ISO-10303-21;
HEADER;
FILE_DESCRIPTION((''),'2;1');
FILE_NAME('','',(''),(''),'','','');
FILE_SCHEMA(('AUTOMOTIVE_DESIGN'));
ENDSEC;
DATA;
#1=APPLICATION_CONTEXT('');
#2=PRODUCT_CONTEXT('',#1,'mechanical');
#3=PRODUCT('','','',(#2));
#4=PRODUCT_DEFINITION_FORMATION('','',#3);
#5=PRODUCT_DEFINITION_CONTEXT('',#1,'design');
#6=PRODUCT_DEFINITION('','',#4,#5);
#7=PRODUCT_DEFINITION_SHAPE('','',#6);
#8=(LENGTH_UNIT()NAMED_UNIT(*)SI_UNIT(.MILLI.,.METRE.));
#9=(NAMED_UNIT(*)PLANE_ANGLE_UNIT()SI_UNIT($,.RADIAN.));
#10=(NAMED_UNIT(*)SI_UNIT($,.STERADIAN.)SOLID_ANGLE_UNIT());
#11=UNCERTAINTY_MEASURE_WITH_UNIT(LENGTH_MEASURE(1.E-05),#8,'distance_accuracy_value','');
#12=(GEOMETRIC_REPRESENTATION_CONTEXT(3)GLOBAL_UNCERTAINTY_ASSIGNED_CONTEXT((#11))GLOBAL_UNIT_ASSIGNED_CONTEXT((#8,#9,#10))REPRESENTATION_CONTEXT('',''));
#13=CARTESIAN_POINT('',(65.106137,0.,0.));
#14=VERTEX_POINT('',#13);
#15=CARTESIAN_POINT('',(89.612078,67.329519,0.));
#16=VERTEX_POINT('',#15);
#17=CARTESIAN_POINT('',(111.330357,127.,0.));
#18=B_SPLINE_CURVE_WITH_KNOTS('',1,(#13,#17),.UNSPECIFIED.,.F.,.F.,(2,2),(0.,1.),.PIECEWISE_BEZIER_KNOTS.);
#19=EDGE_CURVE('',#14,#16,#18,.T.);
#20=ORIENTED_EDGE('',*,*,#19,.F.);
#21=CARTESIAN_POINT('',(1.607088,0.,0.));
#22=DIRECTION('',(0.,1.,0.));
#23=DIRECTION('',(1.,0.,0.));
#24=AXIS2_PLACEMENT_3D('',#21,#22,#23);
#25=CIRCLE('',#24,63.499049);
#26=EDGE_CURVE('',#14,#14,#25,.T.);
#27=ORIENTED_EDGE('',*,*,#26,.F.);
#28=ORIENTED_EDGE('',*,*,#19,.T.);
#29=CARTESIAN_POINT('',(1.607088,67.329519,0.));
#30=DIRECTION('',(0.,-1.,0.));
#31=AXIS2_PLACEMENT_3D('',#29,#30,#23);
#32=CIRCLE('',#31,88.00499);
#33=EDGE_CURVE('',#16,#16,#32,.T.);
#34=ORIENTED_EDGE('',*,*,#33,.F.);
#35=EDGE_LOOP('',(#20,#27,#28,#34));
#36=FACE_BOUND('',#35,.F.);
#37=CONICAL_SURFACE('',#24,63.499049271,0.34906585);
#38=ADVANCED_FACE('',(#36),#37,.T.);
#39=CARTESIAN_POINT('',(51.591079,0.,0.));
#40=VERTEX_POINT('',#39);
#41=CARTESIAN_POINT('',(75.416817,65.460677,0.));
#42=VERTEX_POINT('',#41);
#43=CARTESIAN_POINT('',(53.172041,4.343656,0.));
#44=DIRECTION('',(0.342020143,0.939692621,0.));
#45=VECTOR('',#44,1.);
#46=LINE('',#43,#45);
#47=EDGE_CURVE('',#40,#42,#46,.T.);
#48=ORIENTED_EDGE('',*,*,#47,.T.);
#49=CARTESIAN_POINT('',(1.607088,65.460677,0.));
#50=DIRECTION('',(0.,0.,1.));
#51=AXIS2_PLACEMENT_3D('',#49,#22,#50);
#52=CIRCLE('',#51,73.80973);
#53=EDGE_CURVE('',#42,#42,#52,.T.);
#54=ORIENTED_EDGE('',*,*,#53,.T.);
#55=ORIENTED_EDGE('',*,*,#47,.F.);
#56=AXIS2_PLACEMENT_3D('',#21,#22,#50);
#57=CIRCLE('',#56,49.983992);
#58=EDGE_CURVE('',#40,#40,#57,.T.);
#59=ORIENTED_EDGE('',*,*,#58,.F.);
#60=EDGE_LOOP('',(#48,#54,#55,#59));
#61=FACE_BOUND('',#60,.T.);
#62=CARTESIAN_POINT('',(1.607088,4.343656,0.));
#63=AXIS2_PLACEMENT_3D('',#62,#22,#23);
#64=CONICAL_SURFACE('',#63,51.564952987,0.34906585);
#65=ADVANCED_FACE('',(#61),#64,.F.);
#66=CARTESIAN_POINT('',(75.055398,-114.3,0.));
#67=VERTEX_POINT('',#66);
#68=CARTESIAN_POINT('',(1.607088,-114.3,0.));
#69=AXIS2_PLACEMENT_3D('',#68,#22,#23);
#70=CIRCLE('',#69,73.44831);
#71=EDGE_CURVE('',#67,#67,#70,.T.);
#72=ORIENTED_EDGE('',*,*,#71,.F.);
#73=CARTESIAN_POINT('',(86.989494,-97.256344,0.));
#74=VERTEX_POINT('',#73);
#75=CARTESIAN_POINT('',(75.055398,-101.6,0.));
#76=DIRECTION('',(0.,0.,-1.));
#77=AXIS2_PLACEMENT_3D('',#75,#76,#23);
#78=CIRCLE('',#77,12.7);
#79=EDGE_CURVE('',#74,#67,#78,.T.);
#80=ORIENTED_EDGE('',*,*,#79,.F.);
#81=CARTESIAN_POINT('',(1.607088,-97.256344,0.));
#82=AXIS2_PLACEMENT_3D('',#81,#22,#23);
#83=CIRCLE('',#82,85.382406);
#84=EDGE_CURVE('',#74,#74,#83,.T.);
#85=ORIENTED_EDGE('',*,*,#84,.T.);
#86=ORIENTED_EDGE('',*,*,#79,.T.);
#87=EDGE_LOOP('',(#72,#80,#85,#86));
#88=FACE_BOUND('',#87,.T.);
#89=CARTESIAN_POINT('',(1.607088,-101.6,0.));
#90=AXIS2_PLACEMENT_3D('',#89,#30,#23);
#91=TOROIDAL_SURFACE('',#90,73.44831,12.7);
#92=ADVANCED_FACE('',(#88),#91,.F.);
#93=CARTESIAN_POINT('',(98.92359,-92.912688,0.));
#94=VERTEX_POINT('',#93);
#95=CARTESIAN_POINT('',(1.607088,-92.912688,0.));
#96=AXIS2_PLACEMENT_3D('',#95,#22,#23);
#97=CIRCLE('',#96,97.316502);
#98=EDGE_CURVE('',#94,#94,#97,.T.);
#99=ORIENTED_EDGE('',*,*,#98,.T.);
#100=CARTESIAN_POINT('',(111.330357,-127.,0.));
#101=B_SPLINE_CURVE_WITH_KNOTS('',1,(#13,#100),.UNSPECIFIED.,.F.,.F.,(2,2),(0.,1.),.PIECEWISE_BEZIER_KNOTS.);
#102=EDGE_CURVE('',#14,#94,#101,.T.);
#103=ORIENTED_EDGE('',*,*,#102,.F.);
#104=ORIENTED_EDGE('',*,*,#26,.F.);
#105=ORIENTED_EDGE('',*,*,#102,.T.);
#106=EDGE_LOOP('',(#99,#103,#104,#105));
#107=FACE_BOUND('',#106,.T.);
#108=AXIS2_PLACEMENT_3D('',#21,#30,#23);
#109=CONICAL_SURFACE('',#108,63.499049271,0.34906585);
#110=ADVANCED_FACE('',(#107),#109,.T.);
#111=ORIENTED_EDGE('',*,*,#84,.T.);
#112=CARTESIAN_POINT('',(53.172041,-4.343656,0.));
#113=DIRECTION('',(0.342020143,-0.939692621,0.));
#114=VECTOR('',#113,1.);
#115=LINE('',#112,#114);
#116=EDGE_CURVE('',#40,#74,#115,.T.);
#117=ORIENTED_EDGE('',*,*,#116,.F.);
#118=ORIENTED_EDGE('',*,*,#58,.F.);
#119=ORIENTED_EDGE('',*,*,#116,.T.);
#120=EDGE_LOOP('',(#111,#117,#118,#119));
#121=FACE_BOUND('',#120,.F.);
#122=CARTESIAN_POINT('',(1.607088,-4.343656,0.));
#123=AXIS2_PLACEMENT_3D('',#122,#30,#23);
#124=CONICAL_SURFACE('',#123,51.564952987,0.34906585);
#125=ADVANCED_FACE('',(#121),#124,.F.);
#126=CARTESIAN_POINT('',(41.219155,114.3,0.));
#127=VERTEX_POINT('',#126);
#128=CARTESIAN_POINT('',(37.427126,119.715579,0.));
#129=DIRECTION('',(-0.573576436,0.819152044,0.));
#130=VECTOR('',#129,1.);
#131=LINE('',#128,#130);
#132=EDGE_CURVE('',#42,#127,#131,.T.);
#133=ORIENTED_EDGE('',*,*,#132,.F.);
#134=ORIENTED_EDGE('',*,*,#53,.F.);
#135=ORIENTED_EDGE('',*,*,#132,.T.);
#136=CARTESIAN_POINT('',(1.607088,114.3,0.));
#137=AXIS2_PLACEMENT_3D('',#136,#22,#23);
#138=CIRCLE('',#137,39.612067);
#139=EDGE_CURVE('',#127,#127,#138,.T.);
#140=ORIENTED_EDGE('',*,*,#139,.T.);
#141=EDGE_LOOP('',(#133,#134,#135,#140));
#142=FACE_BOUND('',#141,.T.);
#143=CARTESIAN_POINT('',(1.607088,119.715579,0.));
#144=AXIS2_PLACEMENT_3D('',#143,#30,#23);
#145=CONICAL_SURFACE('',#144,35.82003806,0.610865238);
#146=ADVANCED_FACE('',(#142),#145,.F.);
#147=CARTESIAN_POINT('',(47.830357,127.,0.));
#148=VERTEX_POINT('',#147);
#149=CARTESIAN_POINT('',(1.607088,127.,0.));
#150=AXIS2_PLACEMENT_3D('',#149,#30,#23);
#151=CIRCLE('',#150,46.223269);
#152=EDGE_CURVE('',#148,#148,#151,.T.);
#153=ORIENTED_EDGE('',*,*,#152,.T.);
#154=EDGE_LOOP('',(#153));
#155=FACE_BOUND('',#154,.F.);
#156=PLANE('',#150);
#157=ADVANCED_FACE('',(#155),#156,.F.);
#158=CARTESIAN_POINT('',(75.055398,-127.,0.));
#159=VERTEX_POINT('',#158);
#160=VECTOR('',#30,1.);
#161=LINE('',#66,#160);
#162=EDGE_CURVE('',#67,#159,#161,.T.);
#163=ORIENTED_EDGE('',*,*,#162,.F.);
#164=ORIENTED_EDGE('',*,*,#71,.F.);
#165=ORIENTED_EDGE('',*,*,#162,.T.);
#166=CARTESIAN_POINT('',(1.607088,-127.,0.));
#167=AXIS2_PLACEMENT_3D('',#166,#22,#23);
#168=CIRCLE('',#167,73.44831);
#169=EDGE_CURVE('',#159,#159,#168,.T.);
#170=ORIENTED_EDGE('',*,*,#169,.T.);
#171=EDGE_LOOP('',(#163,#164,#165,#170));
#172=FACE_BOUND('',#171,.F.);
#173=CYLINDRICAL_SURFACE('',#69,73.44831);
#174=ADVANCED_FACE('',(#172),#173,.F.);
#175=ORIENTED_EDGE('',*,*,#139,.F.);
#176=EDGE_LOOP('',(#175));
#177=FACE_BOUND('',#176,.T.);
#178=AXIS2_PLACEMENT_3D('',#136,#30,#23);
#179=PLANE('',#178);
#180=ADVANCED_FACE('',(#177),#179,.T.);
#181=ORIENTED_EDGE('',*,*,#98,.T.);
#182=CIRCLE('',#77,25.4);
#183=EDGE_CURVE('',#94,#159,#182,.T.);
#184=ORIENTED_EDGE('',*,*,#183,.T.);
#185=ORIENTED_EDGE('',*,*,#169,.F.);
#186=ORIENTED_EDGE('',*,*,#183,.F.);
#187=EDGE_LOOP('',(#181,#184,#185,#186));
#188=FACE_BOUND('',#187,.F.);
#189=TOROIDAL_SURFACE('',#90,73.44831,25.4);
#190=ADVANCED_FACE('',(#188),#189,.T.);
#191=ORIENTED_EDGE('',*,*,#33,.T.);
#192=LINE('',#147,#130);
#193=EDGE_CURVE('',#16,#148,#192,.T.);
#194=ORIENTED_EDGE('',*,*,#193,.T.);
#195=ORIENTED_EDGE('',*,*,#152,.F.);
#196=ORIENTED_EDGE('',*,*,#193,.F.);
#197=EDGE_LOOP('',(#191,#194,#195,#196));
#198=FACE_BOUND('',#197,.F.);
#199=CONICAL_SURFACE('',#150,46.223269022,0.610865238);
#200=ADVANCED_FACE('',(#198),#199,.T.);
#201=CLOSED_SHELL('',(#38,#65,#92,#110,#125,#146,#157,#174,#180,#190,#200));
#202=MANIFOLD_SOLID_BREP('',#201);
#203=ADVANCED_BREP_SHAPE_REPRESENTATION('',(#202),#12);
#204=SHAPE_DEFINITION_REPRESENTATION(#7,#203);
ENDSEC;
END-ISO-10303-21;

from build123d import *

# Parameters (mm, degrees)
F0_R     = 63.4990492705
F1_DEPTH = 127
F1_TAPER = -20
F2_R     = 25.4
F3_SIZE  = 63.5
F4_T     = -12.7


# Not quite as in the source:
# - a shell that OpenCascade refuses in one call is made with other operations: the cavity is built on its own and cut out


with BuildPart() as f1:
    # F0 (on Front) → F1 (new body, symmetric)
    with BuildSketch(Plane.XZ):
        with Locations((1.6070879065, 0)):
            Circle(F0_R)
    extrude(amount=F1_DEPTH, both=True, taper=F1_TAPER)

    # F2
    f2_edges = [f1.edges().sort_by_distance(p)[0] for p in [
        (-108.116181, -127, 0),
    ]]
    fillet(f2_edges, radius=F2_R)

    # F3
    f3_edges = [f1.edges().sort_by_distance(p)[0] for p in [
        (-108.116181, 127, 0),
    ]]
    chamfer(f3_edges, length=F3_SIZE)

    # F4: a shell. OpenCascade refuses it in one call, so the cavity is built on its own and cut out:
    # the body offset inwards by the wall thickness, plus a prism from it out through each open face.
    f4_core = offset(f1.part, amount=F4_T, kind=Kind.INTERSECTION, mode=Mode.PRIVATE)
    f4_exits = [f4_core.faces().sort_by_distance(p)[0] for p in [
        (1.607088, -114.3, 0),
    ]]
    add(f4_core, mode=Mode.SUBTRACT)
    extrude(f4_exits, amount=-F4_T, mode=Mode.SUBTRACT)


solid = f1.part
